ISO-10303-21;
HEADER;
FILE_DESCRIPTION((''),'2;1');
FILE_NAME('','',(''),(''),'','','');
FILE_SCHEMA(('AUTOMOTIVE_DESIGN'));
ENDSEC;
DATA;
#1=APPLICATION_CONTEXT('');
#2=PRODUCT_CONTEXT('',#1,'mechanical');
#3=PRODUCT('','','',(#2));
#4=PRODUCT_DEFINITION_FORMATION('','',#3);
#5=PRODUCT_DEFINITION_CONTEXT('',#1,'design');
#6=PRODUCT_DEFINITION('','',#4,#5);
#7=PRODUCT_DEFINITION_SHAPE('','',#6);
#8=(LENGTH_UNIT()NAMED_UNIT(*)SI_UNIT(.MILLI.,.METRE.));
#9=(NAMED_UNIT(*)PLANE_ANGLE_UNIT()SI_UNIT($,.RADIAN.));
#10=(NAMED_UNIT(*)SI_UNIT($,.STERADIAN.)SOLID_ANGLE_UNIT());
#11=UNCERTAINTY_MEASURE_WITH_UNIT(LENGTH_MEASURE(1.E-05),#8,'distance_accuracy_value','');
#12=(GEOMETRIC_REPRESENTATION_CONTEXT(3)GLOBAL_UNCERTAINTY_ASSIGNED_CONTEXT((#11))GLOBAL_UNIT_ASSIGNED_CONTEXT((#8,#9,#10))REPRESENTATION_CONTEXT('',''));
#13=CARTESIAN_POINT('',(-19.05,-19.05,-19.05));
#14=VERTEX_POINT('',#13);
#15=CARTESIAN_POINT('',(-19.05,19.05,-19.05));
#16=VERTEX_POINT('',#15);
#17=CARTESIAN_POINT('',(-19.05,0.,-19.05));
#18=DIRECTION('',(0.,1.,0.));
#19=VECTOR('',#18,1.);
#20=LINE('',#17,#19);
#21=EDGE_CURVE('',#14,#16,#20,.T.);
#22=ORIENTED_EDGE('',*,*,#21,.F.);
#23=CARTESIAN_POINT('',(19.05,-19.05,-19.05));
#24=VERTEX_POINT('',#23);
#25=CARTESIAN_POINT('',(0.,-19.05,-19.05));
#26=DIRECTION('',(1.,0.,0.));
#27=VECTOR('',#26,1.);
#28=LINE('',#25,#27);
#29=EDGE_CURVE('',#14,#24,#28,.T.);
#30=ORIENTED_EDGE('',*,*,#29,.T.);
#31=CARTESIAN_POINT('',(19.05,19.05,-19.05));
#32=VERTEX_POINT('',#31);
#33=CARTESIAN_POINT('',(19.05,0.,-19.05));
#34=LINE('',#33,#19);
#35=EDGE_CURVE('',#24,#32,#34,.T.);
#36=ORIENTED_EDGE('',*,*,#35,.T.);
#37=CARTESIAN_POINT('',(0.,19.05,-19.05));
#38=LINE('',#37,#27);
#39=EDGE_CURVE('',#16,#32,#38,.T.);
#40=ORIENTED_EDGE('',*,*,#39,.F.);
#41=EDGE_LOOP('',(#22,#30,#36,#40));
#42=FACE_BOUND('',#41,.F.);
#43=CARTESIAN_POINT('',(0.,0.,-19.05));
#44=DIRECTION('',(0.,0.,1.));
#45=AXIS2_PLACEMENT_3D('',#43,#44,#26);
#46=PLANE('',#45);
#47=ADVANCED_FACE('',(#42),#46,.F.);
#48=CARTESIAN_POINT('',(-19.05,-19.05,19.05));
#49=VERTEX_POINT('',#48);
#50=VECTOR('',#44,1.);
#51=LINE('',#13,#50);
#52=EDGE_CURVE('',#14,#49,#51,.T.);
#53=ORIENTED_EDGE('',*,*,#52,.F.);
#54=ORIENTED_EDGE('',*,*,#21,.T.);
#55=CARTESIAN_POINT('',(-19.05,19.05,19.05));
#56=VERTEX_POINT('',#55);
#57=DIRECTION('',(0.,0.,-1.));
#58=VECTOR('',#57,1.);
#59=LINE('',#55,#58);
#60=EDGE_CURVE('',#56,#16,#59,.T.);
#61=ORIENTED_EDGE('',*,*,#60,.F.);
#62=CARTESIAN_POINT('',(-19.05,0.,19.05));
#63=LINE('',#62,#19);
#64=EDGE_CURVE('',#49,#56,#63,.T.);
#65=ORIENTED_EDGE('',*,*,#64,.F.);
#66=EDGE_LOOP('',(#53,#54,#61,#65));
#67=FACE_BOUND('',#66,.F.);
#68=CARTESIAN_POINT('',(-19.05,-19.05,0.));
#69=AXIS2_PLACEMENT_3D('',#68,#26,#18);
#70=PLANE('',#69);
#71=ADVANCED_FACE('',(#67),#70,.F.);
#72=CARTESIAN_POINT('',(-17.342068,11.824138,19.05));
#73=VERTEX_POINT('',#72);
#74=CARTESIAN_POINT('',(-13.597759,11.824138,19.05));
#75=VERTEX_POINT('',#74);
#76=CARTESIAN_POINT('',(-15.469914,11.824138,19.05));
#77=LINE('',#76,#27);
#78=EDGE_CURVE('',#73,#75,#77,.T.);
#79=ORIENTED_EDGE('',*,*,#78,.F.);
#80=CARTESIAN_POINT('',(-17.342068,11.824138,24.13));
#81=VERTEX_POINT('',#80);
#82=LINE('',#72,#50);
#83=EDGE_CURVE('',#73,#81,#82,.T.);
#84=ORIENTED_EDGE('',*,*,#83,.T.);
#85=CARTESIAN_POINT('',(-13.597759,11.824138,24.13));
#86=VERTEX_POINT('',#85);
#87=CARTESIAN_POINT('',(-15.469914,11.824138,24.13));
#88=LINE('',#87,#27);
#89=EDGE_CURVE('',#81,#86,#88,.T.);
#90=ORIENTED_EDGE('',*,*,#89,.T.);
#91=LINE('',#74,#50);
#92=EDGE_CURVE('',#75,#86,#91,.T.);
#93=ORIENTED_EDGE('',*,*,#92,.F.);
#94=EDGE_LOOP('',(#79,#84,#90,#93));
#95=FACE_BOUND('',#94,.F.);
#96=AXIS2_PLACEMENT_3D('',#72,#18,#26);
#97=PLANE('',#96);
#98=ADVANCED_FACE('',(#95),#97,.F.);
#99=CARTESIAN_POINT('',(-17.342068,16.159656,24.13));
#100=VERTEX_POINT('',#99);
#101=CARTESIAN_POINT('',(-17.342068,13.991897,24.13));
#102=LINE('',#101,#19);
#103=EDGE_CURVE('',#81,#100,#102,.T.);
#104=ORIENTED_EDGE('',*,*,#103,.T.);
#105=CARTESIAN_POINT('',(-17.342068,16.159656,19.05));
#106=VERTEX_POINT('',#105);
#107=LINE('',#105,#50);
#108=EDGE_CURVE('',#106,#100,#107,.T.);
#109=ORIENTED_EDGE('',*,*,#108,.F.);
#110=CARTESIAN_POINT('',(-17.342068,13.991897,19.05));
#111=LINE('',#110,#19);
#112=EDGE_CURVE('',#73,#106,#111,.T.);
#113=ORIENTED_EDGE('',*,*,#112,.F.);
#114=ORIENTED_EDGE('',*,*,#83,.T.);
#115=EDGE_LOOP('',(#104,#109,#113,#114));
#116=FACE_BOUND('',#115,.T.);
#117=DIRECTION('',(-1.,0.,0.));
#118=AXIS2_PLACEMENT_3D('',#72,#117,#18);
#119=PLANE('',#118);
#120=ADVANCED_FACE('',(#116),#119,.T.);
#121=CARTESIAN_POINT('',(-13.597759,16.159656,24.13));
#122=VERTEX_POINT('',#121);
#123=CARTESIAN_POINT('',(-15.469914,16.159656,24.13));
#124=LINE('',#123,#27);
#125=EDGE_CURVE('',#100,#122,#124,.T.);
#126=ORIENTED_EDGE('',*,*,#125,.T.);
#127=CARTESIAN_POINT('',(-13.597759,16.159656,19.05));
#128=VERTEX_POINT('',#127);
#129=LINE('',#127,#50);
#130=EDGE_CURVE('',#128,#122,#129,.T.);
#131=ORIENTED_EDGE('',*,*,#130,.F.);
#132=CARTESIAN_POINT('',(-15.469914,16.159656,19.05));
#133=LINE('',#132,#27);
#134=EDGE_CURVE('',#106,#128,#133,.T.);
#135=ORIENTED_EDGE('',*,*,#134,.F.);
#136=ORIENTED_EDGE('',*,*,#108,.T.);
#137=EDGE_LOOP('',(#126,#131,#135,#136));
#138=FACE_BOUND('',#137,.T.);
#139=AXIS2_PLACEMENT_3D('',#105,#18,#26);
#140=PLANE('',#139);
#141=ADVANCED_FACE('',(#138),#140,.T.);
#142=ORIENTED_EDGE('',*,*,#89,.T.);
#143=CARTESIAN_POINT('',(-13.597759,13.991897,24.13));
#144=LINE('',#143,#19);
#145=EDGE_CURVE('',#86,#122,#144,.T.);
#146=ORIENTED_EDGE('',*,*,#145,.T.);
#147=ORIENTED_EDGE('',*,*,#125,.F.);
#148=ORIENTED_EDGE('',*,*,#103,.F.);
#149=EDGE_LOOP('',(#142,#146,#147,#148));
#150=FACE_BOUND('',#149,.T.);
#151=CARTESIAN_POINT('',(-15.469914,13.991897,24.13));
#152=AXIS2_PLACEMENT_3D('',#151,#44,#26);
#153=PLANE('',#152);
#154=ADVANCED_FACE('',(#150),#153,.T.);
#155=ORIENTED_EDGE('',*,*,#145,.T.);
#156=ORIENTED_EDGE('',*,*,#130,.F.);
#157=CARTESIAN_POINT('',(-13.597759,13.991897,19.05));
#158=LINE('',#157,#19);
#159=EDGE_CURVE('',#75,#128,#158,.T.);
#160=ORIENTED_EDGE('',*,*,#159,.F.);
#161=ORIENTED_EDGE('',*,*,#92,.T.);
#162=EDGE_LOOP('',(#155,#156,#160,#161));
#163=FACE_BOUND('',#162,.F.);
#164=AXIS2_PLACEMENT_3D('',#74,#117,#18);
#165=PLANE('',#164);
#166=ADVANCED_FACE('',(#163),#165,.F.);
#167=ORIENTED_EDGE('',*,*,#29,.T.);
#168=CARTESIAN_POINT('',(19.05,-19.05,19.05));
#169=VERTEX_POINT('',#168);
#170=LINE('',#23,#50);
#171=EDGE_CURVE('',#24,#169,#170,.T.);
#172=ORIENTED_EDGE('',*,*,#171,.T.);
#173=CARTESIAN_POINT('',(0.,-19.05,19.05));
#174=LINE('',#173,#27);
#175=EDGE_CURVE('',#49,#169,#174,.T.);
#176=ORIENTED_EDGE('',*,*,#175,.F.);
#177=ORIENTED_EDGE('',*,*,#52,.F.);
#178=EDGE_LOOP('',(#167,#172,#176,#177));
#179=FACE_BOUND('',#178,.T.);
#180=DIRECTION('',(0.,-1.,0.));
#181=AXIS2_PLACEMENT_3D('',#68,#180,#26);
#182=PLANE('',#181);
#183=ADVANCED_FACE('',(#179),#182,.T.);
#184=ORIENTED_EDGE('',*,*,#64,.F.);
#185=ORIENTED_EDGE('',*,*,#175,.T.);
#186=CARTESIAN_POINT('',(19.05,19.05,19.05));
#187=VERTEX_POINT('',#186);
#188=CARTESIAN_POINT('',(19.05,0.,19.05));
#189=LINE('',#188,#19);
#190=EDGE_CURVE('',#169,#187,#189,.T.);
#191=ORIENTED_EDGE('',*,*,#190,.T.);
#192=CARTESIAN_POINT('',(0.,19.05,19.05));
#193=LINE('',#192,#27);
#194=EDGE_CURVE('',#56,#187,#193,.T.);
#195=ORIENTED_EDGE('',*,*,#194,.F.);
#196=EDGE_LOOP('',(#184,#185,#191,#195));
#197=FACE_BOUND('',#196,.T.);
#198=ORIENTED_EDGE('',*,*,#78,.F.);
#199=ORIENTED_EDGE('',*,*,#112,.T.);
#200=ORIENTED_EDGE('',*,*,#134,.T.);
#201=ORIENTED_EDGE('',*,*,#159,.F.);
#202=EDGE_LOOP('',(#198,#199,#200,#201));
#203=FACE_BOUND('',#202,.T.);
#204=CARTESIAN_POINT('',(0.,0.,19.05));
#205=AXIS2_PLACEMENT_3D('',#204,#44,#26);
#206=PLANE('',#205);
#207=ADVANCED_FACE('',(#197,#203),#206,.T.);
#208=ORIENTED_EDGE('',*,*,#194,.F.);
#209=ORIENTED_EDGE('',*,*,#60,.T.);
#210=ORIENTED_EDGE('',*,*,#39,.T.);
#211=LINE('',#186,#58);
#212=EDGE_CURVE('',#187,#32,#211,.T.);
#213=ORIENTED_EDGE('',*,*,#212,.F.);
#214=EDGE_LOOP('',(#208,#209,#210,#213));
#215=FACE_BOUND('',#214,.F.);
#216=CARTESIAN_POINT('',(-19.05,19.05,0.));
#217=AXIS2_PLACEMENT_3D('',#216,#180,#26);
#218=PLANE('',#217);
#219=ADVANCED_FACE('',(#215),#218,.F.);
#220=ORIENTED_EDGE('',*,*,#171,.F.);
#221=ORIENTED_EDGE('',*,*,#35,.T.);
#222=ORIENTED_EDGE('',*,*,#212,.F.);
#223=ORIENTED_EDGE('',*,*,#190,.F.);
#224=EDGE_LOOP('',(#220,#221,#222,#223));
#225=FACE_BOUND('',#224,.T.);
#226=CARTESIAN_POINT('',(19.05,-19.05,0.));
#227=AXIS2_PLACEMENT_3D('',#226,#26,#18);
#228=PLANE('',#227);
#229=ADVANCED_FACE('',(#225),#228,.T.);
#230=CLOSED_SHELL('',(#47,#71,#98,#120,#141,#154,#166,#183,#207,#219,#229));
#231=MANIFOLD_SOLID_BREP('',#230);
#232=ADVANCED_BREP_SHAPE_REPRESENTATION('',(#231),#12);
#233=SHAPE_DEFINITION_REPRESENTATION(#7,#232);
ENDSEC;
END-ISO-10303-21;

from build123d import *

# Parameters (mm, degrees)
F1_W     = 38.1
F1_H     = 38.1
F2_DEPTH = 19.05
F3_W     = 3.7443088368
F3_H     = 4.3355179951
F4_DEPTH = 5.08


# Not quite as in the source:
# - a variable given as a bare number and used for a length is read in inches; the dataset says mm whatever the document's units were


with BuildPart() as f2:
    # F1 (on Top) → F2 (new body, symmetric)
    with BuildSketch(Plane.XY):
        Rectangle(F1_W, F1_H)
    extrude(amount=F2_DEPTH, both=True)

    # F3 (on face) → F4 (join)
    with BuildSketch(Plane.XY.offset(19.05)):
        with Locations((-15.4699138366, 13.9918965288)):
            Rectangle(F3_W, F3_H)
    extrude(amount=F4_DEPTH)


solid = f2.part
